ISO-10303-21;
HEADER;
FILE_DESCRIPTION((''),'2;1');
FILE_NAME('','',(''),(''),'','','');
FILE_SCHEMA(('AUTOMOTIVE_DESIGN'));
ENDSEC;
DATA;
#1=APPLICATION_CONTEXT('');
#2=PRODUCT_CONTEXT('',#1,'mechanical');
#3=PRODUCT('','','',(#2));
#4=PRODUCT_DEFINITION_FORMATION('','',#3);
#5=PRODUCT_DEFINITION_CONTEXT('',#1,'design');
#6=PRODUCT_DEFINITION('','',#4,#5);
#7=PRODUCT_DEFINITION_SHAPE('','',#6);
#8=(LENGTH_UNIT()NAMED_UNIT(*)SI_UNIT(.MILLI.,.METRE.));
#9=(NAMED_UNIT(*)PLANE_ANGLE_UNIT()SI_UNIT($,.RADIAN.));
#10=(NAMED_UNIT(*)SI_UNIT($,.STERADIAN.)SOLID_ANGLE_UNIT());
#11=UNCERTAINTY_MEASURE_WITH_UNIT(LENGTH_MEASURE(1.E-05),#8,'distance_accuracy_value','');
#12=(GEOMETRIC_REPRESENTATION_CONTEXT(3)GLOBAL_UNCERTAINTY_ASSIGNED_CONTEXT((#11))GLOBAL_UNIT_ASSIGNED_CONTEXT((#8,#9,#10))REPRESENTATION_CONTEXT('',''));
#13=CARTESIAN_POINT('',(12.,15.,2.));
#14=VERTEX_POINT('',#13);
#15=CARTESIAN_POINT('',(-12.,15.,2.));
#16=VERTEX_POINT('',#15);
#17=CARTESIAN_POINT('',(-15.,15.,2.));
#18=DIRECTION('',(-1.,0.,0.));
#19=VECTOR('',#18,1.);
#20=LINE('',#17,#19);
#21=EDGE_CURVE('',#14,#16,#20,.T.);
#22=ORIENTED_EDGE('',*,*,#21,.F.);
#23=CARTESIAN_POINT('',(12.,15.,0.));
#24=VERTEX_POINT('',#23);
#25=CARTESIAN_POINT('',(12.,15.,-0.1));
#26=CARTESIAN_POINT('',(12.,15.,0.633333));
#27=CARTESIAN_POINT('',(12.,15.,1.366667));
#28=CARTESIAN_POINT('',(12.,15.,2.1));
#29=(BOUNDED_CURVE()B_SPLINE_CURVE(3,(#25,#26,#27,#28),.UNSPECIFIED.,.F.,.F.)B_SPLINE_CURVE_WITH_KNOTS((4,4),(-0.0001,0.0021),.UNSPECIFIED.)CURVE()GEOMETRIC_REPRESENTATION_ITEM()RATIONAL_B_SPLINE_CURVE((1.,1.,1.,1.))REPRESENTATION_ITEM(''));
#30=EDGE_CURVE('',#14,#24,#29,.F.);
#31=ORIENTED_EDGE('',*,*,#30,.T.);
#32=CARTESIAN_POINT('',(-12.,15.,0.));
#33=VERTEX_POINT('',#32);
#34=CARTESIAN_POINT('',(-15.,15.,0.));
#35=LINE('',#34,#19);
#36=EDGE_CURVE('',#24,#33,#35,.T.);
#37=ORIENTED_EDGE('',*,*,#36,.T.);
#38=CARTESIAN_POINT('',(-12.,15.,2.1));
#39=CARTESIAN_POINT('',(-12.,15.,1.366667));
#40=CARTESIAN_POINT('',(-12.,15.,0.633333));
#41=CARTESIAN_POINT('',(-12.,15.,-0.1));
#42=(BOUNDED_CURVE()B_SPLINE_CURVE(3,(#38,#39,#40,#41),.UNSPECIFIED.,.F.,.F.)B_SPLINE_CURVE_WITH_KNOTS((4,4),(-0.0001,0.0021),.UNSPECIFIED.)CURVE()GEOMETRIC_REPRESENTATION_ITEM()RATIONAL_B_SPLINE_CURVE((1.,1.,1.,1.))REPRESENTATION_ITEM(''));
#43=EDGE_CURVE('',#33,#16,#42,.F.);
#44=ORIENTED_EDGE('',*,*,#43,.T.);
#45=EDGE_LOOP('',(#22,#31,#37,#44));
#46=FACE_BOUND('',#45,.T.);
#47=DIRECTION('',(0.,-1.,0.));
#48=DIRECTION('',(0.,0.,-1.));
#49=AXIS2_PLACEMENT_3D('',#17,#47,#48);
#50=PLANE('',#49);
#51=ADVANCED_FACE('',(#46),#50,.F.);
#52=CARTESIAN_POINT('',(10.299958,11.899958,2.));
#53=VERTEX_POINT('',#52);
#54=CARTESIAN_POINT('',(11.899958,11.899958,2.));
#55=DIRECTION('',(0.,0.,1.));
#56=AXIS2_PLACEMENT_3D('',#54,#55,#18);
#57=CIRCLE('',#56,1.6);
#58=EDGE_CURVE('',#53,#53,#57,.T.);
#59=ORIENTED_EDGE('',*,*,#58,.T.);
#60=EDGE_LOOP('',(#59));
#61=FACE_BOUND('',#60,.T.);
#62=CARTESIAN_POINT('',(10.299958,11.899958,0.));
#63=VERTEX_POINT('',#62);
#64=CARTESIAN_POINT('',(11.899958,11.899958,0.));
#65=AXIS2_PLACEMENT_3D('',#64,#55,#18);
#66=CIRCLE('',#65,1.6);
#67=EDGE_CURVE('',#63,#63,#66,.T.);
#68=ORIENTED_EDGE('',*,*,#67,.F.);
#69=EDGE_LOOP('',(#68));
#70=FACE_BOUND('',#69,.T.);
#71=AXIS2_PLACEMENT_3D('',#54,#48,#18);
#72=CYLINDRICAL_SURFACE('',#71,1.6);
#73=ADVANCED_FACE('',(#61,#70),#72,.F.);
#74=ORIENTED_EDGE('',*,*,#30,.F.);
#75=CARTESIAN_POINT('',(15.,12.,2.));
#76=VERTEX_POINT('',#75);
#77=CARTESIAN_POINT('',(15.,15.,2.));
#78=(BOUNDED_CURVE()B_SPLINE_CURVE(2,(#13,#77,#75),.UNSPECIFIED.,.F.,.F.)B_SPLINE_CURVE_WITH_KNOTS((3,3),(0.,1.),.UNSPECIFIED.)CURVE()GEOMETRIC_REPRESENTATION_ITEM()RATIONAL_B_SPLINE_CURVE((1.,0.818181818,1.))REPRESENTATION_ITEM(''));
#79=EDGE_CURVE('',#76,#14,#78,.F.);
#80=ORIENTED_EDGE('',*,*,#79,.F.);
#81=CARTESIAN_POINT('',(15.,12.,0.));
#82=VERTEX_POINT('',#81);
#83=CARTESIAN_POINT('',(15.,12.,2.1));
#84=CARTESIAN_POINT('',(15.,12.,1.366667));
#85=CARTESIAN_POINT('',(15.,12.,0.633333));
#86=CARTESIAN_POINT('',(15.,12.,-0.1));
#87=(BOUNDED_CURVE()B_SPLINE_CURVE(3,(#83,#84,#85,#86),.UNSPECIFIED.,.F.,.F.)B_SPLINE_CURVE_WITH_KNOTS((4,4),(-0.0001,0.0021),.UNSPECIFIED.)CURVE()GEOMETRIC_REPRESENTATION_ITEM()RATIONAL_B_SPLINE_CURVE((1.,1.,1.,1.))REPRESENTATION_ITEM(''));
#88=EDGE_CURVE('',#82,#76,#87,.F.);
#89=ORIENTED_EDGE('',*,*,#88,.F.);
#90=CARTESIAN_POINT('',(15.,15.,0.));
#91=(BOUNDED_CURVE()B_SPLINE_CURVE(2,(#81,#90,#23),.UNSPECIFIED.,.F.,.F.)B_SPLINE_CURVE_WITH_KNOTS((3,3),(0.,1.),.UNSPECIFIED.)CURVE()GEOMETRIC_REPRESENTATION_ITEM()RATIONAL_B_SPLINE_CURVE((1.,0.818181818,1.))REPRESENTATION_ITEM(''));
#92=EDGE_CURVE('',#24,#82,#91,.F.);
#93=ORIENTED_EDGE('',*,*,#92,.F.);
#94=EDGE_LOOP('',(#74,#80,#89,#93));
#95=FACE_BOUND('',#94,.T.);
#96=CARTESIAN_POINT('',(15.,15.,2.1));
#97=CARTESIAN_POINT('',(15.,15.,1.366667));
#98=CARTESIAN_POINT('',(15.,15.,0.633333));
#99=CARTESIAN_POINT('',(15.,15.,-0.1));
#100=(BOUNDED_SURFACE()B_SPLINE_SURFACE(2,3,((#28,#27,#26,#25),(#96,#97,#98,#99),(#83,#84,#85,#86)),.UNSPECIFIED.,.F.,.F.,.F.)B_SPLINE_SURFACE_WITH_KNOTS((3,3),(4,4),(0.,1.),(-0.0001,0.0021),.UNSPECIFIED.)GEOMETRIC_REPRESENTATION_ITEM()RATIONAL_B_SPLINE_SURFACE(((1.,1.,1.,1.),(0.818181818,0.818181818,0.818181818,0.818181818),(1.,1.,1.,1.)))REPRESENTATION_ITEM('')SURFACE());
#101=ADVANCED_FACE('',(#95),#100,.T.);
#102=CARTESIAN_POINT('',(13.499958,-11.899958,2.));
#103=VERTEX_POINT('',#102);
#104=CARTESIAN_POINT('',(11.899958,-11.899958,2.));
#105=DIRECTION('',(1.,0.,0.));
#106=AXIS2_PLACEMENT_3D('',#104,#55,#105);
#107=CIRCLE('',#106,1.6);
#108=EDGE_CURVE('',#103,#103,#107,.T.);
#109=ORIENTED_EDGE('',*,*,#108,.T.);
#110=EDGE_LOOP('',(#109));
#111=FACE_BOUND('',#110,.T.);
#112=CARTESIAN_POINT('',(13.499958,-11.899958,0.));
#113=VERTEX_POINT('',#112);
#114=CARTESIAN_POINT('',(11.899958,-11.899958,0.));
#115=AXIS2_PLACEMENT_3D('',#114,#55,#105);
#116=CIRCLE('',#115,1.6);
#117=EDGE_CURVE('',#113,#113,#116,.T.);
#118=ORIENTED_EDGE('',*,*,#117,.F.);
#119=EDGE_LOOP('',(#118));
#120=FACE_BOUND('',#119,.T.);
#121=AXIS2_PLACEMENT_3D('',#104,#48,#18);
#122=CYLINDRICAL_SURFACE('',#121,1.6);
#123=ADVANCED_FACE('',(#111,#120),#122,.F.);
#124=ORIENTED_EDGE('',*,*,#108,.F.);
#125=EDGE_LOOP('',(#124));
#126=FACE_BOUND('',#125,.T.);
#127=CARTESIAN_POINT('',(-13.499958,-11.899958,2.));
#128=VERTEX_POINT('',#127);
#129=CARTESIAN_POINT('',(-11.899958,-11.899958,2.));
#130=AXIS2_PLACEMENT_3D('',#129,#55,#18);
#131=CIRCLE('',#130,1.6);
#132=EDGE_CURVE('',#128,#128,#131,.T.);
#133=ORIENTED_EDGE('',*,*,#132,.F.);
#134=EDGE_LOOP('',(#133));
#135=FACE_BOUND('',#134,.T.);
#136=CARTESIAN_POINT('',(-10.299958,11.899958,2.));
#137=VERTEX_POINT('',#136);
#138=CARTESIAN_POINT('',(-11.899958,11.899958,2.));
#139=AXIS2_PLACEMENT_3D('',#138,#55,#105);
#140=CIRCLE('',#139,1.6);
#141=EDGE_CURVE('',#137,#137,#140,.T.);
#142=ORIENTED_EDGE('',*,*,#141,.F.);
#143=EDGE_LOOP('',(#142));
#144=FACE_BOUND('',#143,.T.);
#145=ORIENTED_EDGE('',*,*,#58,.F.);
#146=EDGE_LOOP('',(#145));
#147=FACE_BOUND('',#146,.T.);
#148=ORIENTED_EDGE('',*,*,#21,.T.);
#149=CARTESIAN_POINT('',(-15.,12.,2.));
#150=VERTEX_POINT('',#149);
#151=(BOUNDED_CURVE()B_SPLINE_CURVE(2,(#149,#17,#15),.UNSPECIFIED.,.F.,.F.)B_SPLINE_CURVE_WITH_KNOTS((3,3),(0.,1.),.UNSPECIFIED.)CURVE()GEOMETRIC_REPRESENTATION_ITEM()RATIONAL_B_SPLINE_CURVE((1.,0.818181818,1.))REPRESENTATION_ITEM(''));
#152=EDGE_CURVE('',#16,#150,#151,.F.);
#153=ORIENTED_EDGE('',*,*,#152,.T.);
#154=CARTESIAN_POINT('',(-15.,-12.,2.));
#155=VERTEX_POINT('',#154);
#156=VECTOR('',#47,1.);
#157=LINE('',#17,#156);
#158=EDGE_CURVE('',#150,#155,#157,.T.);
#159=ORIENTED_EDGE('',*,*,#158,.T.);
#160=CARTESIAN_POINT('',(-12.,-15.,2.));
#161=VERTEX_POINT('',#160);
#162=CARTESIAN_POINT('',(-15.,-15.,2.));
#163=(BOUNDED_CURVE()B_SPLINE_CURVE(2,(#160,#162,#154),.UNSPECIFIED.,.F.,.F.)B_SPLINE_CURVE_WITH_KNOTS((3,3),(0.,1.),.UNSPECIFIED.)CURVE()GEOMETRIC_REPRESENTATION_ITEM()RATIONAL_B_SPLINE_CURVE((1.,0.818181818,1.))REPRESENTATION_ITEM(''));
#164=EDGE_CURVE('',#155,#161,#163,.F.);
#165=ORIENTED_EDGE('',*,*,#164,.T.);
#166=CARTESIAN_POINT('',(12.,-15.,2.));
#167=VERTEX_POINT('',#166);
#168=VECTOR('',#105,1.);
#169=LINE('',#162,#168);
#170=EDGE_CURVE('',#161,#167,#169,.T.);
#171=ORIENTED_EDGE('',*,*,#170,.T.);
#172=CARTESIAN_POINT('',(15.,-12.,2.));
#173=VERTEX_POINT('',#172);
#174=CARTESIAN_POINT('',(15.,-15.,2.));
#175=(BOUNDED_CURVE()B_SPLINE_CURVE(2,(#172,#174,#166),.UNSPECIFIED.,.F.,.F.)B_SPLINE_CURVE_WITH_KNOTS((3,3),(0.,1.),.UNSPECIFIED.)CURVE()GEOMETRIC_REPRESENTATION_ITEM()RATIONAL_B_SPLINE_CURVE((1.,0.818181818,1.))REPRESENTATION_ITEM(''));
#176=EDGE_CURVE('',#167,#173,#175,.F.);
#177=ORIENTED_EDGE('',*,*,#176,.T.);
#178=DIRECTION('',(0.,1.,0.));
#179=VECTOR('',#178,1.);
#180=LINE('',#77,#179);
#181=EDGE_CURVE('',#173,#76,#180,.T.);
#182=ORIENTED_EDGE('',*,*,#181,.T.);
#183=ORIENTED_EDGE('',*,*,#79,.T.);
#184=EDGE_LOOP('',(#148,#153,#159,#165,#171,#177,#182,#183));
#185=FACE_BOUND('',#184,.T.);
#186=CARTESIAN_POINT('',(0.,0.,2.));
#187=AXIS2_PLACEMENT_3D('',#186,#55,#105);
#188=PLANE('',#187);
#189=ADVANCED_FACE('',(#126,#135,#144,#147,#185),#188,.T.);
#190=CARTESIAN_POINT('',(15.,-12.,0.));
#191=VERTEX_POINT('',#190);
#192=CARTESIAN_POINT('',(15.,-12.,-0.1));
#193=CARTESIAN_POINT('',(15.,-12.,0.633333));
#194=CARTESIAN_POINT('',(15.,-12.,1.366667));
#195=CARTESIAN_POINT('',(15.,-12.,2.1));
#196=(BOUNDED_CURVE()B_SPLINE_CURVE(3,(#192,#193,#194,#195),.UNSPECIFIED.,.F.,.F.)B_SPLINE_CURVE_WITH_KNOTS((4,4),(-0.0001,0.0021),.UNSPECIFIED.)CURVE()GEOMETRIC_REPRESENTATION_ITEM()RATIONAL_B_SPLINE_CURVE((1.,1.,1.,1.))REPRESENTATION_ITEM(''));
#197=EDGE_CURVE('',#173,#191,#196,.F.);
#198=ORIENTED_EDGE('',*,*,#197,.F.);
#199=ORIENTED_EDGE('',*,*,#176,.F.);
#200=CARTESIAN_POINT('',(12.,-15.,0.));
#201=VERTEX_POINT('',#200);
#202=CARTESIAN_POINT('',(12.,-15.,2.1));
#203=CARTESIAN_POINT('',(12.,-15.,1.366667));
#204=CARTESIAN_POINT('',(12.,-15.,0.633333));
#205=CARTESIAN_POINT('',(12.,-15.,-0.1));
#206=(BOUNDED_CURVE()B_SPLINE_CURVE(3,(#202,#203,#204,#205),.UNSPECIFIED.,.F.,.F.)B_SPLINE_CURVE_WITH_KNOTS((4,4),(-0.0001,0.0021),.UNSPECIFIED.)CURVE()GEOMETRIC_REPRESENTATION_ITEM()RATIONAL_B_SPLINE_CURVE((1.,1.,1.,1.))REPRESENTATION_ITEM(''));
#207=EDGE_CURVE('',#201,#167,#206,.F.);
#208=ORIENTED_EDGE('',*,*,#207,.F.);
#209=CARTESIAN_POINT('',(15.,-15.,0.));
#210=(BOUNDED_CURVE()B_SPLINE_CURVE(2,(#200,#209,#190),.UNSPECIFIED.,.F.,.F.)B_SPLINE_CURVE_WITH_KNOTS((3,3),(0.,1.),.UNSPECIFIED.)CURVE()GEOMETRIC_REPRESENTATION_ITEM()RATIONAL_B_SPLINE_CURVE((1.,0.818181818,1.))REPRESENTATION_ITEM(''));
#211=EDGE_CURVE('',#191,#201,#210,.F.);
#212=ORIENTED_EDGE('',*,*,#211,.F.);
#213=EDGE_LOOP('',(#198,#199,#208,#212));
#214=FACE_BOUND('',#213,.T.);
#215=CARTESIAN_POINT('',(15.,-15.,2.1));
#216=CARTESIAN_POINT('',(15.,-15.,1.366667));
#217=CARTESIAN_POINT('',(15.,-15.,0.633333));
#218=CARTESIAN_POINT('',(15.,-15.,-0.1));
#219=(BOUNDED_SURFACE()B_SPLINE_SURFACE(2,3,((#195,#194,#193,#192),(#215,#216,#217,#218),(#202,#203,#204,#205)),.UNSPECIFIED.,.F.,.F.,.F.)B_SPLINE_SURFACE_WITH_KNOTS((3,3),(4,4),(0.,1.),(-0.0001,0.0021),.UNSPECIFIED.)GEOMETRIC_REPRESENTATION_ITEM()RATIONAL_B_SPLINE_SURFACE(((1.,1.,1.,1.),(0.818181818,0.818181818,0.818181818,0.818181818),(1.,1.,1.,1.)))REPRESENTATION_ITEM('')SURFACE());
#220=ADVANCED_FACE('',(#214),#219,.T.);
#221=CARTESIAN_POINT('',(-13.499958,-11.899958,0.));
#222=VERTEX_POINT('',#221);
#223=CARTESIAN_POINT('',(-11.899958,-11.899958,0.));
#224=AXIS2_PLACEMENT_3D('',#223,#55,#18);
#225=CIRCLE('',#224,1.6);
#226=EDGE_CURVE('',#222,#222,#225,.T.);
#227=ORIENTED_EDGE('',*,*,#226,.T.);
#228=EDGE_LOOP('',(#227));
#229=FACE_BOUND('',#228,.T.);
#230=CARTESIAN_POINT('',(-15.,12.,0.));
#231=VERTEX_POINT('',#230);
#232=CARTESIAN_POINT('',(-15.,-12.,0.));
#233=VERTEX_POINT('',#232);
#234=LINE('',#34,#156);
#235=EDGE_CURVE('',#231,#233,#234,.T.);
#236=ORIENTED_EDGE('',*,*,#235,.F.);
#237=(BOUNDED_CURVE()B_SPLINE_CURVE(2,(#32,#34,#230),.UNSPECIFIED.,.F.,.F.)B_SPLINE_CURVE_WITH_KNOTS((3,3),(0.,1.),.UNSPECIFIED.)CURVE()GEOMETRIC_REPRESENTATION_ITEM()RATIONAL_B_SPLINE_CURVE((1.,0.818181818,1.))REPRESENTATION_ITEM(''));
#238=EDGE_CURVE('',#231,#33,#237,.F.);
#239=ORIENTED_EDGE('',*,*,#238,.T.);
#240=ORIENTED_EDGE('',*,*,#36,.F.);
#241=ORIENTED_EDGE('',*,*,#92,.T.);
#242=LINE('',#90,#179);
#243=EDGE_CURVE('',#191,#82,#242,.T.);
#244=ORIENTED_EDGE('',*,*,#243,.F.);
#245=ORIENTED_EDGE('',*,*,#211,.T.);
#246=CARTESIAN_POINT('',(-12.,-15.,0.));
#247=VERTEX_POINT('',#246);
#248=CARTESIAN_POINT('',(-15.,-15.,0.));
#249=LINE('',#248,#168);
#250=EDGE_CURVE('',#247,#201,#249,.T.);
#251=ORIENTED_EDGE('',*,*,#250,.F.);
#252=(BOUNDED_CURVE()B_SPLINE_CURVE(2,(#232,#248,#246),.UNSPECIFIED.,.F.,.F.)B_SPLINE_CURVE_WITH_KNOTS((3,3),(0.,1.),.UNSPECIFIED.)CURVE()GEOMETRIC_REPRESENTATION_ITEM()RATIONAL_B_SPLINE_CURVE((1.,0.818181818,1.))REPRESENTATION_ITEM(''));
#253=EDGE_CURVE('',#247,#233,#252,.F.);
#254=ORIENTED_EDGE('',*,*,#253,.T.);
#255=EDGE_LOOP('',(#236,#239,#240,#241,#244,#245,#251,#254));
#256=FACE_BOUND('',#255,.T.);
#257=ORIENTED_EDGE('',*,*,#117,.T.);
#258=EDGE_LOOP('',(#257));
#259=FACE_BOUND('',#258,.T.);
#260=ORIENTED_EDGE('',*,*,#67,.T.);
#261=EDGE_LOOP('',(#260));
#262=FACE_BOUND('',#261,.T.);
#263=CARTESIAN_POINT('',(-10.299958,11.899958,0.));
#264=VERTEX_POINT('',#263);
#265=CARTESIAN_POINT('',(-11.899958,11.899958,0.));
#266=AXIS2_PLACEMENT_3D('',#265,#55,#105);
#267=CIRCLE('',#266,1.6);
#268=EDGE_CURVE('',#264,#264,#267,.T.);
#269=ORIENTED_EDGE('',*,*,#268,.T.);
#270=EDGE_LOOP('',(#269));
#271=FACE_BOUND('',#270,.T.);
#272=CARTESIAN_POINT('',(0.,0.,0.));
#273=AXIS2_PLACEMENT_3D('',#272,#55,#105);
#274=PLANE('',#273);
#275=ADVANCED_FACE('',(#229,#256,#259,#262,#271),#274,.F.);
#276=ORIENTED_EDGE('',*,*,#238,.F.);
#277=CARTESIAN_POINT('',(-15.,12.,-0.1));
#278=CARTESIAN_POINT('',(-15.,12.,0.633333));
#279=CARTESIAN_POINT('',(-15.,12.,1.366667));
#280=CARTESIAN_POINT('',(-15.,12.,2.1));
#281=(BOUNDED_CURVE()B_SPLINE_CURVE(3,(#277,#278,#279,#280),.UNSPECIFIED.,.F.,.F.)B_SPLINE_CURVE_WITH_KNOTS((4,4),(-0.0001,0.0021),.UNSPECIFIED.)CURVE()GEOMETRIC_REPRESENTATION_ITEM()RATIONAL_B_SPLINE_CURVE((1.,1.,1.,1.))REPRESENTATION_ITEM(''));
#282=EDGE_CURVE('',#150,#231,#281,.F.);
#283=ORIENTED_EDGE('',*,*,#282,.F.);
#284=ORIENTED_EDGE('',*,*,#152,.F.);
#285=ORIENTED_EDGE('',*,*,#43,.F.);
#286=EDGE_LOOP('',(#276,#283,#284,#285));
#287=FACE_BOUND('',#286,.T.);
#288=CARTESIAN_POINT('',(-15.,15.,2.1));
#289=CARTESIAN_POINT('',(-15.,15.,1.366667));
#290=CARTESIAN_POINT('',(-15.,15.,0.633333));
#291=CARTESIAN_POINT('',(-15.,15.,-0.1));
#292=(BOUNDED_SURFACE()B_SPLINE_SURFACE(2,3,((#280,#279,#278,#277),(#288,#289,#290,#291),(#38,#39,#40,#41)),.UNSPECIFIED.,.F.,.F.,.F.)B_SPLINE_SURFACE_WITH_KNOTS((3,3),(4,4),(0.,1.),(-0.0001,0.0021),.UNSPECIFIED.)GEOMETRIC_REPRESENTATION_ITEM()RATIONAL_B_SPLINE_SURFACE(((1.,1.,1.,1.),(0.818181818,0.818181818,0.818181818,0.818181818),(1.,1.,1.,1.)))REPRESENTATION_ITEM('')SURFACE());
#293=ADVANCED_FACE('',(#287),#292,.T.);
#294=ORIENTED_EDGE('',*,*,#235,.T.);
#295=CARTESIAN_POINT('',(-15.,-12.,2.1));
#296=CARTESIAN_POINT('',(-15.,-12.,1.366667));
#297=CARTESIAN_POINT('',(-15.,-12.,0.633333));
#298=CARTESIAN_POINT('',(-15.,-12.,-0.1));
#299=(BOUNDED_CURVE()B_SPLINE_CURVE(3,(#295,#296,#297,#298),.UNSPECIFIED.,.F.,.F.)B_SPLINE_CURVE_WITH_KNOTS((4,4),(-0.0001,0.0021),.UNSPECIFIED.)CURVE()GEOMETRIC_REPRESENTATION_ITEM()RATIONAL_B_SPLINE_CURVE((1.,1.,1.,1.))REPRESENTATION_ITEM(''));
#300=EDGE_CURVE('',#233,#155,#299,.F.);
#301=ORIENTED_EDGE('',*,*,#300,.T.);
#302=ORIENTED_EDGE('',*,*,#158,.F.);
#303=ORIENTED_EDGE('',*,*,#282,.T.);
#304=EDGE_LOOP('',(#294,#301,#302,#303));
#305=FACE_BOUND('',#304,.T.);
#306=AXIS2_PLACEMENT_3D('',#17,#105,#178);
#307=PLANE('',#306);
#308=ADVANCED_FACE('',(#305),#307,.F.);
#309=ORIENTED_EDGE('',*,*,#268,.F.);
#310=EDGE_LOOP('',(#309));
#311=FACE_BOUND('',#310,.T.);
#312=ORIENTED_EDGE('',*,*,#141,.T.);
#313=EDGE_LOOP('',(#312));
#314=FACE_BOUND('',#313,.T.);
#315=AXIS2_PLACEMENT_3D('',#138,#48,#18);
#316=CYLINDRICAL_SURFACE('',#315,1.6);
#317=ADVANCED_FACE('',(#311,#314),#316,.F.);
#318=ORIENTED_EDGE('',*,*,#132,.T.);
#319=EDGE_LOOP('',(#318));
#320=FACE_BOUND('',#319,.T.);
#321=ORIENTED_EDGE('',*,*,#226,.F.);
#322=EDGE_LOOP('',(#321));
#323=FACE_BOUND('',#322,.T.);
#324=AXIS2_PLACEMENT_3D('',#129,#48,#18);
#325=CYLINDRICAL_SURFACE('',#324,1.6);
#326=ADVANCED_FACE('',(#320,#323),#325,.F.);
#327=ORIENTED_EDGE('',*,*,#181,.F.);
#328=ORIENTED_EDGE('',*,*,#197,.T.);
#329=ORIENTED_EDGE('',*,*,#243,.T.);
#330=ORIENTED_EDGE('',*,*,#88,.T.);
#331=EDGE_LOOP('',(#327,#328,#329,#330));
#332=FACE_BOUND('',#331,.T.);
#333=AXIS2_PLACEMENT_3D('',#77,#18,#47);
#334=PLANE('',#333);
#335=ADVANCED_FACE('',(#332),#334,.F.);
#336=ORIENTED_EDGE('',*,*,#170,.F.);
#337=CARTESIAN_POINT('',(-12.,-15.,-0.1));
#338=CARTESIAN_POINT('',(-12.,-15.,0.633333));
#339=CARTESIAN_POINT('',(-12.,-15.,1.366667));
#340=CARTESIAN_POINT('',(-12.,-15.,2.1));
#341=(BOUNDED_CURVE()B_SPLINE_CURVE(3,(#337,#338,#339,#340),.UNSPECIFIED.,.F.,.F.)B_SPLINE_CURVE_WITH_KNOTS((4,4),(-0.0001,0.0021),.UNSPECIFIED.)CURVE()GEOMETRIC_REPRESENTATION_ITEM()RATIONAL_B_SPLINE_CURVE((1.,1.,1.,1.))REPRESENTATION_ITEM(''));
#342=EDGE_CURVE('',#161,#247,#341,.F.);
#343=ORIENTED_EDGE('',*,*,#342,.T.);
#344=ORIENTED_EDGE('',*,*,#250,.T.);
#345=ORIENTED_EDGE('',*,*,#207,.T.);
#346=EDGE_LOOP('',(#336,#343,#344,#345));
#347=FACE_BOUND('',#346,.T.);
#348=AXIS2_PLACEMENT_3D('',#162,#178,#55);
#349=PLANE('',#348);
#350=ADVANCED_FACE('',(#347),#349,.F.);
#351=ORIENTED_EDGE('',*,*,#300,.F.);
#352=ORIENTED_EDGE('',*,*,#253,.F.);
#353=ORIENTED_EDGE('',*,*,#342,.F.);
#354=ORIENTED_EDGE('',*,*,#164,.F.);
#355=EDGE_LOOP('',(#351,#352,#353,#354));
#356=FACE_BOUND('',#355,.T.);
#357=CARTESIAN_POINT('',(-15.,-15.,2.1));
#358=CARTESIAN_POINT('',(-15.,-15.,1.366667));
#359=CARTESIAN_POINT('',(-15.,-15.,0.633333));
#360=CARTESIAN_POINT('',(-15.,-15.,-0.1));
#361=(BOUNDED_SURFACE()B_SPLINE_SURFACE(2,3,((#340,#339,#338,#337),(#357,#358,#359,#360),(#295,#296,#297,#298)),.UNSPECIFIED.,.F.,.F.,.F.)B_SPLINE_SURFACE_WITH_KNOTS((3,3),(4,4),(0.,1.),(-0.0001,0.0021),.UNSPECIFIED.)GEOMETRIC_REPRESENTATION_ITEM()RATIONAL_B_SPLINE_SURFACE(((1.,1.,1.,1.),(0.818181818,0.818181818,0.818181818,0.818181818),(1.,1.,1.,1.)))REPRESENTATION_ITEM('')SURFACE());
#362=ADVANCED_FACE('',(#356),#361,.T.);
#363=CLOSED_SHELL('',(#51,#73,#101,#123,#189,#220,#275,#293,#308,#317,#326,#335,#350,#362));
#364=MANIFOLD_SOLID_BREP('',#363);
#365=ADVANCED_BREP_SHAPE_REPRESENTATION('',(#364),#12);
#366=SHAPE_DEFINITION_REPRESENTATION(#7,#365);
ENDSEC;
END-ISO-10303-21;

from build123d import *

# Parameters (mm, degrees)
SKETCH_1_W      = 30
SKETCH_1_H      = 30
SKETCH_1_R      = 1.6
EXTRUDE_1_DEPTH = 2
FILLET_1_SIZE   = 3


with BuildPart() as part:
    # 草图1 → 凸台-拉伸1 (new body)
    with BuildSketch(Plane.XY):
        Rectangle(SKETCH_1_W, SKETCH_1_H)
        with Locations((-11.899958033, 11.899958033)):
            Circle(SKETCH_1_R, mode=Mode.SUBTRACT)
        with Locations(Location((11.899958033, 11.899958033, 0), (0, 0, 180))):
            Circle(SKETCH_1_R, mode=Mode.SUBTRACT)
        with Locations((11.899958033, -11.899958033)):
            Circle(SKETCH_1_R, mode=Mode.SUBTRACT)
        with Locations(Location((-11.899958033, -11.899958033, 0), (0, 0, 180))):
            Circle(SKETCH_1_R, mode=Mode.SUBTRACT)
    extrude(amount=EXTRUDE_1_DEPTH)

    # 圆角1
    # a fillet whose section is not a circle: 3 mm, written as the material it takes off along each edge
    with BuildSketch(Plane(origin=(-15, -15, -7.5), x_dir=(1, 0, 0), z_dir=(0, 0, 1)), Plane(origin=(15, -15, -7.5), x_dir=(0, 1, 0), z_dir=(0, 0, 1)), Plane(origin=(15, 15, -7.5), x_dir=(-1, 0, 0), z_dir=(0, 0, 1))) as fillet_1_piece_1:
        with BuildLine():
            Bezier((FILLET_1_SIZE, 0), (0, 0), (0, FILLET_1_SIZE), weights=[1, 0.818181818, 1])
            Line((0, FILLET_1_SIZE), (0, 0))
            Line((0, 0), (FILLET_1_SIZE, 0))
        make_face()
    extrude(amount=17, mode=Mode.SUBTRACT)
    with BuildSketch(Plane(origin=(-15, 15, -7.5), x_dir=(1, 0, 0), z_dir=(0, 0, 1))) as fillet_1_piece_2:
        with BuildLine():
            Bezier((FILLET_1_SIZE, 0), (0, 0), (0, -FILLET_1_SIZE), weights=[1, 0.818181818, 1])
            Line((0, -FILLET_1_SIZE), (0, 0))
            Line((0, 0), (FILLET_1_SIZE, 0))
        make_face()
    extrude(amount=17, mode=Mode.SUBTRACT)


solid = part.part
